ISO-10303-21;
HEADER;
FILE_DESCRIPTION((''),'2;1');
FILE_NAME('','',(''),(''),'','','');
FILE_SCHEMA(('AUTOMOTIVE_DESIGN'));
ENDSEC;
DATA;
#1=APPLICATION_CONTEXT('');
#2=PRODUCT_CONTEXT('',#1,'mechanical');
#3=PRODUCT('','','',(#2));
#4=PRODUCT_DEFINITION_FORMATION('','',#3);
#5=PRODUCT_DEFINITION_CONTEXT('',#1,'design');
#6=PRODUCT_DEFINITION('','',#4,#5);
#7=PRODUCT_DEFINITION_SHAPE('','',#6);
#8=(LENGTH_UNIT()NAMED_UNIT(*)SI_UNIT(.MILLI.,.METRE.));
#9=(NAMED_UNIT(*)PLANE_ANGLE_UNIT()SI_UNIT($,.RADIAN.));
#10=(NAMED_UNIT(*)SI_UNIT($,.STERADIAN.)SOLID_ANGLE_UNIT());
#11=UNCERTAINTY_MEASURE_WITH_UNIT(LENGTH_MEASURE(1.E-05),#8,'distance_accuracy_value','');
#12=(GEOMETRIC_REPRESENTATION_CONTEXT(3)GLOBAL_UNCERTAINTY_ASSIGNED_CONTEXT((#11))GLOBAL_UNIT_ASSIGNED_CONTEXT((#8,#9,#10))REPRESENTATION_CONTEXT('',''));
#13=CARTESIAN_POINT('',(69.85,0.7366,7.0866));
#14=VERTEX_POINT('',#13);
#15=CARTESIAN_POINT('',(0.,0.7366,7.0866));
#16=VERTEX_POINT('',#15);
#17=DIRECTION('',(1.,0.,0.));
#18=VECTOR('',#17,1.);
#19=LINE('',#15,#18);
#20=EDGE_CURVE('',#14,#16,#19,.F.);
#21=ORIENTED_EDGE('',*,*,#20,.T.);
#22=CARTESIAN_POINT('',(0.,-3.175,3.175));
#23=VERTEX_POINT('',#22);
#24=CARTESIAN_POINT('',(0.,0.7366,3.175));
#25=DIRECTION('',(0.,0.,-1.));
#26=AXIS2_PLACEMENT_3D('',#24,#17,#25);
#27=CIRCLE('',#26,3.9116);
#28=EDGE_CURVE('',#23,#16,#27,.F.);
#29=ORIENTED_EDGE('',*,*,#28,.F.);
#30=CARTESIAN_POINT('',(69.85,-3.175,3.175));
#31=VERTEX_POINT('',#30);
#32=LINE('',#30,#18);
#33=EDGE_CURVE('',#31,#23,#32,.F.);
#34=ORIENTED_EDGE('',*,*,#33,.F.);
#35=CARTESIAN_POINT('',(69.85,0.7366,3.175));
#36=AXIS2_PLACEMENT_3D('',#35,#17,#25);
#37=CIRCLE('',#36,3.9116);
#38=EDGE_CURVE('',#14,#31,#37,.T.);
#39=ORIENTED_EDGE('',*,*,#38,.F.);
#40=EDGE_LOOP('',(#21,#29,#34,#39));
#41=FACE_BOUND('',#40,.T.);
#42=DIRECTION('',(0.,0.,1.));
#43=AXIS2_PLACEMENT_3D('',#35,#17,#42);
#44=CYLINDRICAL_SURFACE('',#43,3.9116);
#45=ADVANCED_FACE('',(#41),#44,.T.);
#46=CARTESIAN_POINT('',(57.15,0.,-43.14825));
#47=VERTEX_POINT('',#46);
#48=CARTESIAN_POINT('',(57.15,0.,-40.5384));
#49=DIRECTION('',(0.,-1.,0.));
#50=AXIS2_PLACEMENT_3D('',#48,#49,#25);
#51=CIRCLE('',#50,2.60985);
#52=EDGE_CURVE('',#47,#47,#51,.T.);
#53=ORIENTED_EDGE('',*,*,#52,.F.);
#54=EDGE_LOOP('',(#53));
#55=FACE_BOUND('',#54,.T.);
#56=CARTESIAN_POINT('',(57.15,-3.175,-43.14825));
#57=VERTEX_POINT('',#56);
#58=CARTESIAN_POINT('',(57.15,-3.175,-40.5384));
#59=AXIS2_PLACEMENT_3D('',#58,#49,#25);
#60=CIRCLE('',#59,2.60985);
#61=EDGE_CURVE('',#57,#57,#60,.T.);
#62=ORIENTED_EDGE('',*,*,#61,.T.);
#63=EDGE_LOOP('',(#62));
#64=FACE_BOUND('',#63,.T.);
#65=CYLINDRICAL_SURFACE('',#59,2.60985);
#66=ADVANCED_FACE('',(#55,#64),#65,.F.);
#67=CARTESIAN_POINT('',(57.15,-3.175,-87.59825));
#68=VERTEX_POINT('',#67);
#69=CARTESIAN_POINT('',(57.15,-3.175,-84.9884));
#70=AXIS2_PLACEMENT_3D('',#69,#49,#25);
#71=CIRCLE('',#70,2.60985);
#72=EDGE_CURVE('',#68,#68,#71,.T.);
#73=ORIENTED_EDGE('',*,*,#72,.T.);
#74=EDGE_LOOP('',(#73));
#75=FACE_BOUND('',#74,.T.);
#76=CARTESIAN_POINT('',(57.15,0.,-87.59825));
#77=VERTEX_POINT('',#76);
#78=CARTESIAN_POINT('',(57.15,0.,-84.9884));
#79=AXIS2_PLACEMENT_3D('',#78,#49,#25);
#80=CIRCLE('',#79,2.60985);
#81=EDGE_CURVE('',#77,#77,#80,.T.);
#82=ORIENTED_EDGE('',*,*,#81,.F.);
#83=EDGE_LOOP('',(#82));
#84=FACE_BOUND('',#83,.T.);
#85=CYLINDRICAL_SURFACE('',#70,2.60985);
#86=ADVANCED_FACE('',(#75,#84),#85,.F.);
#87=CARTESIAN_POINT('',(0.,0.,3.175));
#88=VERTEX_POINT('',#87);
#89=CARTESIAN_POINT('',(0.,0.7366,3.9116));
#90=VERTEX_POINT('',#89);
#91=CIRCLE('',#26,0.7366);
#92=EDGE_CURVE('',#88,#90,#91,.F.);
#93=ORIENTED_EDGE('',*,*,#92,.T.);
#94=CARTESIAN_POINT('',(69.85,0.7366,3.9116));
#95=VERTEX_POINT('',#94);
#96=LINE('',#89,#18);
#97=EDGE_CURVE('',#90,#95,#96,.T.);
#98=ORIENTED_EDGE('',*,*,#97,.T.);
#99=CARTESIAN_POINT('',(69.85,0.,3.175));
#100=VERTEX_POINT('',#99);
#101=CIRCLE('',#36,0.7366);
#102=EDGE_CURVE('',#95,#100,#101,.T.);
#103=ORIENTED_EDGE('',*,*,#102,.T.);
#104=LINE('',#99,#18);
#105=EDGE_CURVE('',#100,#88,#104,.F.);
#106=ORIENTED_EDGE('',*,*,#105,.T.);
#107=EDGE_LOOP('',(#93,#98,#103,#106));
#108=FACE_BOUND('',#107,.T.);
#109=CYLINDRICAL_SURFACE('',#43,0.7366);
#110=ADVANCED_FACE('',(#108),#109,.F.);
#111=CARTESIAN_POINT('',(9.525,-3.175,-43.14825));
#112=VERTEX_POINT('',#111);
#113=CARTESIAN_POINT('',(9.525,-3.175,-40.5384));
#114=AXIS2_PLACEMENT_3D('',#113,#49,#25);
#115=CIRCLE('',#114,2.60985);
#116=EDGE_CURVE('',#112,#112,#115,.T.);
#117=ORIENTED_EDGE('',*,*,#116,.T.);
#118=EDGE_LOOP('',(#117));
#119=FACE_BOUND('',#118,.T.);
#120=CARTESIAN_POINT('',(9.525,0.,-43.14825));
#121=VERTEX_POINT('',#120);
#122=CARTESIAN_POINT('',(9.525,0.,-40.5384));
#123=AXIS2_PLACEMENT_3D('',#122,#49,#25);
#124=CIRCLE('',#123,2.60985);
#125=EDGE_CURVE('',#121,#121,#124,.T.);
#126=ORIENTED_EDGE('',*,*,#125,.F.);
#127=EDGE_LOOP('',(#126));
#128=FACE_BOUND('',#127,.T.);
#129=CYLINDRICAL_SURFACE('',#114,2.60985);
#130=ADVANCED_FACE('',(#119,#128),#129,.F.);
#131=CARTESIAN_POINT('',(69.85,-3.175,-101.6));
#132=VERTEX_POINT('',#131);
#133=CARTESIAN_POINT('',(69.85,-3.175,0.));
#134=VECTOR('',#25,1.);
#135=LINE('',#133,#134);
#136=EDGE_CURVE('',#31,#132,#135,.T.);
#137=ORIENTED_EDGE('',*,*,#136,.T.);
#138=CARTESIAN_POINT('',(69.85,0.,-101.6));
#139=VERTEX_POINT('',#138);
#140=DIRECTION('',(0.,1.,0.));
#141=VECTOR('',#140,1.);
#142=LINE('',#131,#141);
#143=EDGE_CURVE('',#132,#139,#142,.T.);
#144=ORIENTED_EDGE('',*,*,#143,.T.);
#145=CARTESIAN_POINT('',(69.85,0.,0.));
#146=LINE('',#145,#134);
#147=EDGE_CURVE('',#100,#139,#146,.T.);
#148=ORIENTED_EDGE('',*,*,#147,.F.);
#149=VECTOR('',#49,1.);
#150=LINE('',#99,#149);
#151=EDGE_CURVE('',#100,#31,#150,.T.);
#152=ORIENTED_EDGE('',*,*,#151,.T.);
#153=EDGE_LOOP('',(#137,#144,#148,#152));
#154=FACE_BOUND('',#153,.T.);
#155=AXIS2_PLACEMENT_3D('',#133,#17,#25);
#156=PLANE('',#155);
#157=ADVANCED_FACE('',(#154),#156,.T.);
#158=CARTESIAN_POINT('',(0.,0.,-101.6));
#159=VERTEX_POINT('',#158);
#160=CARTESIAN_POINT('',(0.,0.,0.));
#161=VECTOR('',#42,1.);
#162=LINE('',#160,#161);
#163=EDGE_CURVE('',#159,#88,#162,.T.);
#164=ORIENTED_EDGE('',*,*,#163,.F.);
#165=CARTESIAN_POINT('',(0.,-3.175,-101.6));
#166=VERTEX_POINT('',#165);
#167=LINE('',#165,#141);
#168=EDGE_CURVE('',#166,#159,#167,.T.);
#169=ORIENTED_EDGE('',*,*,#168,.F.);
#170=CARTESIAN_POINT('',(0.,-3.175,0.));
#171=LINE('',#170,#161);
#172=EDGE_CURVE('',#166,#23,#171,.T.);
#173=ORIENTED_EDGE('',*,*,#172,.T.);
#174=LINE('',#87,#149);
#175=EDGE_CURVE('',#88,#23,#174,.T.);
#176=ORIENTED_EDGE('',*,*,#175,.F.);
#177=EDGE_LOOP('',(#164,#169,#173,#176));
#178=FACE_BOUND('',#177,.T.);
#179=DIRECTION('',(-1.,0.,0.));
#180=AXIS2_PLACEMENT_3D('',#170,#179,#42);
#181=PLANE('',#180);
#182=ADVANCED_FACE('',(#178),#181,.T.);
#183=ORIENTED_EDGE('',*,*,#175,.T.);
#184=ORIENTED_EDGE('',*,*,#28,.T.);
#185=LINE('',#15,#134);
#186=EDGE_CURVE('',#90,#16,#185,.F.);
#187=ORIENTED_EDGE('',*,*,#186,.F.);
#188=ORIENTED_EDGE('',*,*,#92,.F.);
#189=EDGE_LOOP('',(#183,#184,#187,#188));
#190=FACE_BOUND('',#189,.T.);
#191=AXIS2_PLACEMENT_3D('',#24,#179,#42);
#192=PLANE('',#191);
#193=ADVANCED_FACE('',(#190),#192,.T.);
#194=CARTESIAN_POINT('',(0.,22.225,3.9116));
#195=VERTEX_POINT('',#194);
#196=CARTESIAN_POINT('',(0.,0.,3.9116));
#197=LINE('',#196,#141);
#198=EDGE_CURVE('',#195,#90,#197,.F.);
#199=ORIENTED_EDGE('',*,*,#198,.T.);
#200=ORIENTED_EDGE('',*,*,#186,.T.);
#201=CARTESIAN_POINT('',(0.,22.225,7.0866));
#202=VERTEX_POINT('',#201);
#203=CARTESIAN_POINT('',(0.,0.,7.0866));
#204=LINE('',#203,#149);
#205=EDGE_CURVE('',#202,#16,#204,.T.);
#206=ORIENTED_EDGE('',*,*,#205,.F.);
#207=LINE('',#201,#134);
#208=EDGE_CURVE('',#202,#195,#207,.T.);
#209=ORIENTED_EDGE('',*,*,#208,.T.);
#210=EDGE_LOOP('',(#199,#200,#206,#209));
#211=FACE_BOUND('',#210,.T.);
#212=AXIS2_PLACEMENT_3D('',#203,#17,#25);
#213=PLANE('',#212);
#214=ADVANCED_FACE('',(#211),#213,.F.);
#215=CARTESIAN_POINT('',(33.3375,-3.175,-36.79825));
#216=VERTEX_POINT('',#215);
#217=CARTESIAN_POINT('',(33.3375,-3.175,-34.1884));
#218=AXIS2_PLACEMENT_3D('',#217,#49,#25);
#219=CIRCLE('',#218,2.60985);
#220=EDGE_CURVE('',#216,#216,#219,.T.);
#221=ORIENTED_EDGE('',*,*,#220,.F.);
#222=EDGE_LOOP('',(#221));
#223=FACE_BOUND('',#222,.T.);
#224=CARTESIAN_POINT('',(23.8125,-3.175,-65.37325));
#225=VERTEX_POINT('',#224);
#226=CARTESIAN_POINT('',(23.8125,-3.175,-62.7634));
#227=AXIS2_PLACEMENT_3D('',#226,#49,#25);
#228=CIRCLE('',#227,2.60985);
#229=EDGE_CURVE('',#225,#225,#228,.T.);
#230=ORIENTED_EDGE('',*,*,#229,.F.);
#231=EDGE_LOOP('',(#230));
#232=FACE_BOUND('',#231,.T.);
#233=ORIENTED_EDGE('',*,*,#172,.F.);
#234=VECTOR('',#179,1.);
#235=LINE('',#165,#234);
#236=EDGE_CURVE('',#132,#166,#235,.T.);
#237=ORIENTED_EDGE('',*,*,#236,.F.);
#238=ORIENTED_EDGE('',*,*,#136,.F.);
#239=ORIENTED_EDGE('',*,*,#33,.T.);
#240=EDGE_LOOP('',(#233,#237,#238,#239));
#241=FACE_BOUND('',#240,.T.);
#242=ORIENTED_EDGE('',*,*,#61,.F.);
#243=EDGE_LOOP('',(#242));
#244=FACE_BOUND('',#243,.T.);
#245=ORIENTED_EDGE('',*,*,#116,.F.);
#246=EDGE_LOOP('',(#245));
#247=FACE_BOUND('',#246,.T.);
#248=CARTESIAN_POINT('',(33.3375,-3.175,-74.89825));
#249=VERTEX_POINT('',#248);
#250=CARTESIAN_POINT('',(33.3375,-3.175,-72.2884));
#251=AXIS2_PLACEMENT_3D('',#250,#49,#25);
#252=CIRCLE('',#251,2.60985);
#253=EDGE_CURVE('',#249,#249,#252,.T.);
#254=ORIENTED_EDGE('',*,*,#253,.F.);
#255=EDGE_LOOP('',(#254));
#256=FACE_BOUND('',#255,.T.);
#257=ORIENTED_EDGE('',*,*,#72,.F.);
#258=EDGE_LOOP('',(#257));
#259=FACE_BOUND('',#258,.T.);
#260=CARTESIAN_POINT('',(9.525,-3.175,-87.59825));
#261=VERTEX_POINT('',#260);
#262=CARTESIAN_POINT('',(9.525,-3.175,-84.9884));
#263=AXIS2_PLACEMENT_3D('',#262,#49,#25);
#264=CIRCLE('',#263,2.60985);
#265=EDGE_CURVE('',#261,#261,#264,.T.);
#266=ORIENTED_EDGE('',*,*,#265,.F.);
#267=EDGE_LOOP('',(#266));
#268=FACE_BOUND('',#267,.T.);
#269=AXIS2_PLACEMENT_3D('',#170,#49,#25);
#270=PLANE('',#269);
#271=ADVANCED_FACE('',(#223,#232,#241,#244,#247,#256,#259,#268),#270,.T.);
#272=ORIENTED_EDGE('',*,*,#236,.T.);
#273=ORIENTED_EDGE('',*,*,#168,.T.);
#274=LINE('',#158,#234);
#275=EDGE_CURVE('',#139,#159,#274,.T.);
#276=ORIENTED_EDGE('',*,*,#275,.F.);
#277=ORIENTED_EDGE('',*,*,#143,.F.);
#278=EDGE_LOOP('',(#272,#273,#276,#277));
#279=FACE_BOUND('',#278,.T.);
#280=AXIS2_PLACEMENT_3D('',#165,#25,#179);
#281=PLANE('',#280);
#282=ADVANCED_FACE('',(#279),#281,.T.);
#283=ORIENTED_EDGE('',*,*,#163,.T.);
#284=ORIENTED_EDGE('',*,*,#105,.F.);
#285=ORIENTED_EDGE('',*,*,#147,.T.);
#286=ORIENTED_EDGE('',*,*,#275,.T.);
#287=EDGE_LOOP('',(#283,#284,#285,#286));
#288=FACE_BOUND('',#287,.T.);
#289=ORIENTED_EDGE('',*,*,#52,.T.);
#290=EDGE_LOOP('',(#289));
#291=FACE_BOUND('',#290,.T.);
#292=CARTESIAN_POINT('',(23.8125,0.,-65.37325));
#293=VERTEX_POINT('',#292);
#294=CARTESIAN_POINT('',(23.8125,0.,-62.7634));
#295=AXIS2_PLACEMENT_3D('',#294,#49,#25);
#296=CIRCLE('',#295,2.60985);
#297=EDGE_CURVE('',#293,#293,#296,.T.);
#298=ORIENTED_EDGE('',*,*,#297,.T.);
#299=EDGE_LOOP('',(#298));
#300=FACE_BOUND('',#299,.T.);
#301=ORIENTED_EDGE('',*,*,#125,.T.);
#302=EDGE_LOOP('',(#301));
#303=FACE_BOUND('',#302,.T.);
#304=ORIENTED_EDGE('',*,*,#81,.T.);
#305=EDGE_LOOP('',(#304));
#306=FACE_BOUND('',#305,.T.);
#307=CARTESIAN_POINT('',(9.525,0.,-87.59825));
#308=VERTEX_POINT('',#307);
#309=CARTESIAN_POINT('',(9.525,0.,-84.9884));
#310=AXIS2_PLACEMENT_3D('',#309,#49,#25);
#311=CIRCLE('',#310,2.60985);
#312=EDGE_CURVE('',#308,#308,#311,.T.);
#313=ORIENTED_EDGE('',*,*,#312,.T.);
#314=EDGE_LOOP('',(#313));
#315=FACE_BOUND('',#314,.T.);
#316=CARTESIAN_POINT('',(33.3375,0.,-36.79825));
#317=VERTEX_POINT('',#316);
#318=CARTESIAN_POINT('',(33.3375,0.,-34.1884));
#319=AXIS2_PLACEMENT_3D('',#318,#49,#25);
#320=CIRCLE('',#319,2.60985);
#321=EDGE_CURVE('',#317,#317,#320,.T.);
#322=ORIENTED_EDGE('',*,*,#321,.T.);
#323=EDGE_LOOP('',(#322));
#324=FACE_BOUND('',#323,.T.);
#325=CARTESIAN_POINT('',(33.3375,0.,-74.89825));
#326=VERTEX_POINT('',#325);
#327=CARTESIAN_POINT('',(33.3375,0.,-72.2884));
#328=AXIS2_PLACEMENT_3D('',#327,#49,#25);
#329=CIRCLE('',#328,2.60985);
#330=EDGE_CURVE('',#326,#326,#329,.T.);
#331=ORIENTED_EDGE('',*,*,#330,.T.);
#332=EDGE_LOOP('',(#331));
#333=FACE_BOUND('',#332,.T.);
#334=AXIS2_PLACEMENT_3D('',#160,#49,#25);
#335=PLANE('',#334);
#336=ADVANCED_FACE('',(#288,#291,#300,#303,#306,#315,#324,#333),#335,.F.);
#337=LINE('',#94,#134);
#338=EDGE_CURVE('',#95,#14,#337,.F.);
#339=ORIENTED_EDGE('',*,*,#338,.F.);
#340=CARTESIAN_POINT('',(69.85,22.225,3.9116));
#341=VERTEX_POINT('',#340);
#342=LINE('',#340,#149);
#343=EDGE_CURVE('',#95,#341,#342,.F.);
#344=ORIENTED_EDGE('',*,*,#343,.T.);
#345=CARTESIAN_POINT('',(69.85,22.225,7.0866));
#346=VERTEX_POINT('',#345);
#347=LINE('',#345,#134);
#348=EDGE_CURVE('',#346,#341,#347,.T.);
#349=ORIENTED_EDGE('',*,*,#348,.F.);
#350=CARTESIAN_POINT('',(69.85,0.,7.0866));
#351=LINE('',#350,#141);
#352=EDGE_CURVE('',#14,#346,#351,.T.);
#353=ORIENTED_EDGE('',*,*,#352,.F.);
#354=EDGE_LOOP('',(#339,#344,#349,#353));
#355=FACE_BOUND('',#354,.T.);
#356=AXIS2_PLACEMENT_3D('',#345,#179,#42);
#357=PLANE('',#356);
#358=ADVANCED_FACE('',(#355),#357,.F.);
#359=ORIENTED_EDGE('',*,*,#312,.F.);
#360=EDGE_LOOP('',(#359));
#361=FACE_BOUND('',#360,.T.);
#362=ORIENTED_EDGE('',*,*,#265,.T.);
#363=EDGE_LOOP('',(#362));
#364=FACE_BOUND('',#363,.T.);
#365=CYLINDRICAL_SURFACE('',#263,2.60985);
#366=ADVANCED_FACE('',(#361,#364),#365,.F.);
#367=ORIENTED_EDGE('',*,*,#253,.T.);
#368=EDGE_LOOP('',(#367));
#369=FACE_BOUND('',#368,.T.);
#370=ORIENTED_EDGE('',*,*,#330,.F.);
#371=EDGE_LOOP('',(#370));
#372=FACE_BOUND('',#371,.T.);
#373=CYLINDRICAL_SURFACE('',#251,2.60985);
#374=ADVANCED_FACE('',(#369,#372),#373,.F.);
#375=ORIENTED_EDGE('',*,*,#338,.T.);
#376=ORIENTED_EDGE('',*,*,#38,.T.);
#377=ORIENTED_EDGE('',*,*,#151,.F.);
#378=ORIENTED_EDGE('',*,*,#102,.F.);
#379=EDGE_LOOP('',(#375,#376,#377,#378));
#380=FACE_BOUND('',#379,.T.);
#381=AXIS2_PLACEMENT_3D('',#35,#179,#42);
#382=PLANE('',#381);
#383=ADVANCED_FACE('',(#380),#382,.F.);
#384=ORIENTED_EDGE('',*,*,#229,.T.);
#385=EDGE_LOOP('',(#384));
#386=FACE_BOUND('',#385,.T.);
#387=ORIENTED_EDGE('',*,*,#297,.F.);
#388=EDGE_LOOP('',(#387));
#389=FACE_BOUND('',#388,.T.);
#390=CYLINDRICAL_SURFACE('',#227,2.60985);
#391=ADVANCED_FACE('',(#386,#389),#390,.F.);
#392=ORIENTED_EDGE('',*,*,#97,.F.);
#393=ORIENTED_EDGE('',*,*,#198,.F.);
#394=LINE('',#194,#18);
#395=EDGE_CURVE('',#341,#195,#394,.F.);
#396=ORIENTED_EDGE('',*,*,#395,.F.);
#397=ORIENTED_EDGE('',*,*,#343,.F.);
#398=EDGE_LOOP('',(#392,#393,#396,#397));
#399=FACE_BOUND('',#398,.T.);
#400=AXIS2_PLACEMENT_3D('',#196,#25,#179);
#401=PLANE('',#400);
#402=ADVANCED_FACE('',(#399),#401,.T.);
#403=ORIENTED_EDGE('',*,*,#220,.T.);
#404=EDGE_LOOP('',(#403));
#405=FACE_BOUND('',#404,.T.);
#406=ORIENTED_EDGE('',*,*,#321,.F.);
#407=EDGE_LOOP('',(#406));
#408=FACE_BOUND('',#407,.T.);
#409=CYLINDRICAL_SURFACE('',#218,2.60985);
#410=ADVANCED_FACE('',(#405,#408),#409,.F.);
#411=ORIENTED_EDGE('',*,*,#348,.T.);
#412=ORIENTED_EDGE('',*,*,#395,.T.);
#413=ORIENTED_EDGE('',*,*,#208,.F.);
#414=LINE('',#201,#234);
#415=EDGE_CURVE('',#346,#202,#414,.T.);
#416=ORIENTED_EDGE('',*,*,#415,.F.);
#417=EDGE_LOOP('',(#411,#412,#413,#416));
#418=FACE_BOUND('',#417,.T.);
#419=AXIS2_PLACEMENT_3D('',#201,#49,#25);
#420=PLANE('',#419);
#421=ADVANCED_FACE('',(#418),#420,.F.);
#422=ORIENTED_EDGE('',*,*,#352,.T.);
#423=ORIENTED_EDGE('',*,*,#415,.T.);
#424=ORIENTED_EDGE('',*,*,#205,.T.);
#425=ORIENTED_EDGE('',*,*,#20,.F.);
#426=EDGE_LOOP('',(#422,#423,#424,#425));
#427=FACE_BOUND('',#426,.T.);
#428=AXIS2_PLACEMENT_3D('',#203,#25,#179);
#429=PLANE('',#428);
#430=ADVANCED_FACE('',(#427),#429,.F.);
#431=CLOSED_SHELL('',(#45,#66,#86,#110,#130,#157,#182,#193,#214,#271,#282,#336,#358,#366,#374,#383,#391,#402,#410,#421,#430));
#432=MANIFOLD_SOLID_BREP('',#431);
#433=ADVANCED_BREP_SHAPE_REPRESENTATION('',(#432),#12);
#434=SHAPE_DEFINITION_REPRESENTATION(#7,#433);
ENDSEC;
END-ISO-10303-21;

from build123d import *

# Parameters (mm, degrees)
SKETCH1_W                   = 69.85
SKETCH1_H                   = 101.6
BASE_FLANGE1_DEPTH          = 3.175
EDGE_FLANGE1_DEPTH          = 69.85
F_5_0_2055_DIAMETER_HOLE1_D = 5.2197


# Sheet-metal steps are written as plain solids
with BuildPart() as part:
    # Sketch1 → Base-Flange1 (new body)
    with BuildSketch(Plane(origin=(0, 0, 0), x_dir=(1, 0, 0), z_dir=(0, 1, 0))):
        with Locations((34.925, 50.8)):
            Rectangle(SKETCH1_W, SKETCH1_H)
    extrude(amount=-BASE_FLANGE1_DEPTH)

    # Edge-Flange1 section (across the edge) → Edge-Flange1 (add)
    with BuildSketch(Plane(origin=(0, 0, 3.9116), x_dir=(0, 0, -1), z_dir=(1, 0, 0))):
        with BuildLine():
            Line((-3.175, 0.7366), (-3.175, 22.225))
            Line((-3.175, 22.225), (0, 22.225))
            Line((0, 22.225), (0, 0.7366))
            ThreePointArc((0, 0.7366), (0.215745145, 0.215745145), (0.7366, 0))
            Line((0.7366, 0), (3.9116, 0))
            Line((3.9116, 0), (3.9116, -3.175))
            Line((3.9116, -3.175), (0.7366, -3.175))
            ThreePointArc((0.7366, -3.175), (-2.029318885, -2.029318885), (-3.175, 0.7366))
        make_face()
    extrude(amount=EDGE_FLANGE1_DEPTH)

    # #5 (0.2055) Diameter Hole1 (through all)
    with Locations(Plane.XZ.offset(3.175)):
        with Locations((33.3375, -34.1884), (23.8125, -62.7634), (33.3375, -72.2884), (57.15, -84.9884), (57.15, -40.5384), (9.525, -40.5384), (9.525, -84.9884)):
            Hole(F_5_0_2055_DIAMETER_HOLE1_D / 2)


solid = part.part
